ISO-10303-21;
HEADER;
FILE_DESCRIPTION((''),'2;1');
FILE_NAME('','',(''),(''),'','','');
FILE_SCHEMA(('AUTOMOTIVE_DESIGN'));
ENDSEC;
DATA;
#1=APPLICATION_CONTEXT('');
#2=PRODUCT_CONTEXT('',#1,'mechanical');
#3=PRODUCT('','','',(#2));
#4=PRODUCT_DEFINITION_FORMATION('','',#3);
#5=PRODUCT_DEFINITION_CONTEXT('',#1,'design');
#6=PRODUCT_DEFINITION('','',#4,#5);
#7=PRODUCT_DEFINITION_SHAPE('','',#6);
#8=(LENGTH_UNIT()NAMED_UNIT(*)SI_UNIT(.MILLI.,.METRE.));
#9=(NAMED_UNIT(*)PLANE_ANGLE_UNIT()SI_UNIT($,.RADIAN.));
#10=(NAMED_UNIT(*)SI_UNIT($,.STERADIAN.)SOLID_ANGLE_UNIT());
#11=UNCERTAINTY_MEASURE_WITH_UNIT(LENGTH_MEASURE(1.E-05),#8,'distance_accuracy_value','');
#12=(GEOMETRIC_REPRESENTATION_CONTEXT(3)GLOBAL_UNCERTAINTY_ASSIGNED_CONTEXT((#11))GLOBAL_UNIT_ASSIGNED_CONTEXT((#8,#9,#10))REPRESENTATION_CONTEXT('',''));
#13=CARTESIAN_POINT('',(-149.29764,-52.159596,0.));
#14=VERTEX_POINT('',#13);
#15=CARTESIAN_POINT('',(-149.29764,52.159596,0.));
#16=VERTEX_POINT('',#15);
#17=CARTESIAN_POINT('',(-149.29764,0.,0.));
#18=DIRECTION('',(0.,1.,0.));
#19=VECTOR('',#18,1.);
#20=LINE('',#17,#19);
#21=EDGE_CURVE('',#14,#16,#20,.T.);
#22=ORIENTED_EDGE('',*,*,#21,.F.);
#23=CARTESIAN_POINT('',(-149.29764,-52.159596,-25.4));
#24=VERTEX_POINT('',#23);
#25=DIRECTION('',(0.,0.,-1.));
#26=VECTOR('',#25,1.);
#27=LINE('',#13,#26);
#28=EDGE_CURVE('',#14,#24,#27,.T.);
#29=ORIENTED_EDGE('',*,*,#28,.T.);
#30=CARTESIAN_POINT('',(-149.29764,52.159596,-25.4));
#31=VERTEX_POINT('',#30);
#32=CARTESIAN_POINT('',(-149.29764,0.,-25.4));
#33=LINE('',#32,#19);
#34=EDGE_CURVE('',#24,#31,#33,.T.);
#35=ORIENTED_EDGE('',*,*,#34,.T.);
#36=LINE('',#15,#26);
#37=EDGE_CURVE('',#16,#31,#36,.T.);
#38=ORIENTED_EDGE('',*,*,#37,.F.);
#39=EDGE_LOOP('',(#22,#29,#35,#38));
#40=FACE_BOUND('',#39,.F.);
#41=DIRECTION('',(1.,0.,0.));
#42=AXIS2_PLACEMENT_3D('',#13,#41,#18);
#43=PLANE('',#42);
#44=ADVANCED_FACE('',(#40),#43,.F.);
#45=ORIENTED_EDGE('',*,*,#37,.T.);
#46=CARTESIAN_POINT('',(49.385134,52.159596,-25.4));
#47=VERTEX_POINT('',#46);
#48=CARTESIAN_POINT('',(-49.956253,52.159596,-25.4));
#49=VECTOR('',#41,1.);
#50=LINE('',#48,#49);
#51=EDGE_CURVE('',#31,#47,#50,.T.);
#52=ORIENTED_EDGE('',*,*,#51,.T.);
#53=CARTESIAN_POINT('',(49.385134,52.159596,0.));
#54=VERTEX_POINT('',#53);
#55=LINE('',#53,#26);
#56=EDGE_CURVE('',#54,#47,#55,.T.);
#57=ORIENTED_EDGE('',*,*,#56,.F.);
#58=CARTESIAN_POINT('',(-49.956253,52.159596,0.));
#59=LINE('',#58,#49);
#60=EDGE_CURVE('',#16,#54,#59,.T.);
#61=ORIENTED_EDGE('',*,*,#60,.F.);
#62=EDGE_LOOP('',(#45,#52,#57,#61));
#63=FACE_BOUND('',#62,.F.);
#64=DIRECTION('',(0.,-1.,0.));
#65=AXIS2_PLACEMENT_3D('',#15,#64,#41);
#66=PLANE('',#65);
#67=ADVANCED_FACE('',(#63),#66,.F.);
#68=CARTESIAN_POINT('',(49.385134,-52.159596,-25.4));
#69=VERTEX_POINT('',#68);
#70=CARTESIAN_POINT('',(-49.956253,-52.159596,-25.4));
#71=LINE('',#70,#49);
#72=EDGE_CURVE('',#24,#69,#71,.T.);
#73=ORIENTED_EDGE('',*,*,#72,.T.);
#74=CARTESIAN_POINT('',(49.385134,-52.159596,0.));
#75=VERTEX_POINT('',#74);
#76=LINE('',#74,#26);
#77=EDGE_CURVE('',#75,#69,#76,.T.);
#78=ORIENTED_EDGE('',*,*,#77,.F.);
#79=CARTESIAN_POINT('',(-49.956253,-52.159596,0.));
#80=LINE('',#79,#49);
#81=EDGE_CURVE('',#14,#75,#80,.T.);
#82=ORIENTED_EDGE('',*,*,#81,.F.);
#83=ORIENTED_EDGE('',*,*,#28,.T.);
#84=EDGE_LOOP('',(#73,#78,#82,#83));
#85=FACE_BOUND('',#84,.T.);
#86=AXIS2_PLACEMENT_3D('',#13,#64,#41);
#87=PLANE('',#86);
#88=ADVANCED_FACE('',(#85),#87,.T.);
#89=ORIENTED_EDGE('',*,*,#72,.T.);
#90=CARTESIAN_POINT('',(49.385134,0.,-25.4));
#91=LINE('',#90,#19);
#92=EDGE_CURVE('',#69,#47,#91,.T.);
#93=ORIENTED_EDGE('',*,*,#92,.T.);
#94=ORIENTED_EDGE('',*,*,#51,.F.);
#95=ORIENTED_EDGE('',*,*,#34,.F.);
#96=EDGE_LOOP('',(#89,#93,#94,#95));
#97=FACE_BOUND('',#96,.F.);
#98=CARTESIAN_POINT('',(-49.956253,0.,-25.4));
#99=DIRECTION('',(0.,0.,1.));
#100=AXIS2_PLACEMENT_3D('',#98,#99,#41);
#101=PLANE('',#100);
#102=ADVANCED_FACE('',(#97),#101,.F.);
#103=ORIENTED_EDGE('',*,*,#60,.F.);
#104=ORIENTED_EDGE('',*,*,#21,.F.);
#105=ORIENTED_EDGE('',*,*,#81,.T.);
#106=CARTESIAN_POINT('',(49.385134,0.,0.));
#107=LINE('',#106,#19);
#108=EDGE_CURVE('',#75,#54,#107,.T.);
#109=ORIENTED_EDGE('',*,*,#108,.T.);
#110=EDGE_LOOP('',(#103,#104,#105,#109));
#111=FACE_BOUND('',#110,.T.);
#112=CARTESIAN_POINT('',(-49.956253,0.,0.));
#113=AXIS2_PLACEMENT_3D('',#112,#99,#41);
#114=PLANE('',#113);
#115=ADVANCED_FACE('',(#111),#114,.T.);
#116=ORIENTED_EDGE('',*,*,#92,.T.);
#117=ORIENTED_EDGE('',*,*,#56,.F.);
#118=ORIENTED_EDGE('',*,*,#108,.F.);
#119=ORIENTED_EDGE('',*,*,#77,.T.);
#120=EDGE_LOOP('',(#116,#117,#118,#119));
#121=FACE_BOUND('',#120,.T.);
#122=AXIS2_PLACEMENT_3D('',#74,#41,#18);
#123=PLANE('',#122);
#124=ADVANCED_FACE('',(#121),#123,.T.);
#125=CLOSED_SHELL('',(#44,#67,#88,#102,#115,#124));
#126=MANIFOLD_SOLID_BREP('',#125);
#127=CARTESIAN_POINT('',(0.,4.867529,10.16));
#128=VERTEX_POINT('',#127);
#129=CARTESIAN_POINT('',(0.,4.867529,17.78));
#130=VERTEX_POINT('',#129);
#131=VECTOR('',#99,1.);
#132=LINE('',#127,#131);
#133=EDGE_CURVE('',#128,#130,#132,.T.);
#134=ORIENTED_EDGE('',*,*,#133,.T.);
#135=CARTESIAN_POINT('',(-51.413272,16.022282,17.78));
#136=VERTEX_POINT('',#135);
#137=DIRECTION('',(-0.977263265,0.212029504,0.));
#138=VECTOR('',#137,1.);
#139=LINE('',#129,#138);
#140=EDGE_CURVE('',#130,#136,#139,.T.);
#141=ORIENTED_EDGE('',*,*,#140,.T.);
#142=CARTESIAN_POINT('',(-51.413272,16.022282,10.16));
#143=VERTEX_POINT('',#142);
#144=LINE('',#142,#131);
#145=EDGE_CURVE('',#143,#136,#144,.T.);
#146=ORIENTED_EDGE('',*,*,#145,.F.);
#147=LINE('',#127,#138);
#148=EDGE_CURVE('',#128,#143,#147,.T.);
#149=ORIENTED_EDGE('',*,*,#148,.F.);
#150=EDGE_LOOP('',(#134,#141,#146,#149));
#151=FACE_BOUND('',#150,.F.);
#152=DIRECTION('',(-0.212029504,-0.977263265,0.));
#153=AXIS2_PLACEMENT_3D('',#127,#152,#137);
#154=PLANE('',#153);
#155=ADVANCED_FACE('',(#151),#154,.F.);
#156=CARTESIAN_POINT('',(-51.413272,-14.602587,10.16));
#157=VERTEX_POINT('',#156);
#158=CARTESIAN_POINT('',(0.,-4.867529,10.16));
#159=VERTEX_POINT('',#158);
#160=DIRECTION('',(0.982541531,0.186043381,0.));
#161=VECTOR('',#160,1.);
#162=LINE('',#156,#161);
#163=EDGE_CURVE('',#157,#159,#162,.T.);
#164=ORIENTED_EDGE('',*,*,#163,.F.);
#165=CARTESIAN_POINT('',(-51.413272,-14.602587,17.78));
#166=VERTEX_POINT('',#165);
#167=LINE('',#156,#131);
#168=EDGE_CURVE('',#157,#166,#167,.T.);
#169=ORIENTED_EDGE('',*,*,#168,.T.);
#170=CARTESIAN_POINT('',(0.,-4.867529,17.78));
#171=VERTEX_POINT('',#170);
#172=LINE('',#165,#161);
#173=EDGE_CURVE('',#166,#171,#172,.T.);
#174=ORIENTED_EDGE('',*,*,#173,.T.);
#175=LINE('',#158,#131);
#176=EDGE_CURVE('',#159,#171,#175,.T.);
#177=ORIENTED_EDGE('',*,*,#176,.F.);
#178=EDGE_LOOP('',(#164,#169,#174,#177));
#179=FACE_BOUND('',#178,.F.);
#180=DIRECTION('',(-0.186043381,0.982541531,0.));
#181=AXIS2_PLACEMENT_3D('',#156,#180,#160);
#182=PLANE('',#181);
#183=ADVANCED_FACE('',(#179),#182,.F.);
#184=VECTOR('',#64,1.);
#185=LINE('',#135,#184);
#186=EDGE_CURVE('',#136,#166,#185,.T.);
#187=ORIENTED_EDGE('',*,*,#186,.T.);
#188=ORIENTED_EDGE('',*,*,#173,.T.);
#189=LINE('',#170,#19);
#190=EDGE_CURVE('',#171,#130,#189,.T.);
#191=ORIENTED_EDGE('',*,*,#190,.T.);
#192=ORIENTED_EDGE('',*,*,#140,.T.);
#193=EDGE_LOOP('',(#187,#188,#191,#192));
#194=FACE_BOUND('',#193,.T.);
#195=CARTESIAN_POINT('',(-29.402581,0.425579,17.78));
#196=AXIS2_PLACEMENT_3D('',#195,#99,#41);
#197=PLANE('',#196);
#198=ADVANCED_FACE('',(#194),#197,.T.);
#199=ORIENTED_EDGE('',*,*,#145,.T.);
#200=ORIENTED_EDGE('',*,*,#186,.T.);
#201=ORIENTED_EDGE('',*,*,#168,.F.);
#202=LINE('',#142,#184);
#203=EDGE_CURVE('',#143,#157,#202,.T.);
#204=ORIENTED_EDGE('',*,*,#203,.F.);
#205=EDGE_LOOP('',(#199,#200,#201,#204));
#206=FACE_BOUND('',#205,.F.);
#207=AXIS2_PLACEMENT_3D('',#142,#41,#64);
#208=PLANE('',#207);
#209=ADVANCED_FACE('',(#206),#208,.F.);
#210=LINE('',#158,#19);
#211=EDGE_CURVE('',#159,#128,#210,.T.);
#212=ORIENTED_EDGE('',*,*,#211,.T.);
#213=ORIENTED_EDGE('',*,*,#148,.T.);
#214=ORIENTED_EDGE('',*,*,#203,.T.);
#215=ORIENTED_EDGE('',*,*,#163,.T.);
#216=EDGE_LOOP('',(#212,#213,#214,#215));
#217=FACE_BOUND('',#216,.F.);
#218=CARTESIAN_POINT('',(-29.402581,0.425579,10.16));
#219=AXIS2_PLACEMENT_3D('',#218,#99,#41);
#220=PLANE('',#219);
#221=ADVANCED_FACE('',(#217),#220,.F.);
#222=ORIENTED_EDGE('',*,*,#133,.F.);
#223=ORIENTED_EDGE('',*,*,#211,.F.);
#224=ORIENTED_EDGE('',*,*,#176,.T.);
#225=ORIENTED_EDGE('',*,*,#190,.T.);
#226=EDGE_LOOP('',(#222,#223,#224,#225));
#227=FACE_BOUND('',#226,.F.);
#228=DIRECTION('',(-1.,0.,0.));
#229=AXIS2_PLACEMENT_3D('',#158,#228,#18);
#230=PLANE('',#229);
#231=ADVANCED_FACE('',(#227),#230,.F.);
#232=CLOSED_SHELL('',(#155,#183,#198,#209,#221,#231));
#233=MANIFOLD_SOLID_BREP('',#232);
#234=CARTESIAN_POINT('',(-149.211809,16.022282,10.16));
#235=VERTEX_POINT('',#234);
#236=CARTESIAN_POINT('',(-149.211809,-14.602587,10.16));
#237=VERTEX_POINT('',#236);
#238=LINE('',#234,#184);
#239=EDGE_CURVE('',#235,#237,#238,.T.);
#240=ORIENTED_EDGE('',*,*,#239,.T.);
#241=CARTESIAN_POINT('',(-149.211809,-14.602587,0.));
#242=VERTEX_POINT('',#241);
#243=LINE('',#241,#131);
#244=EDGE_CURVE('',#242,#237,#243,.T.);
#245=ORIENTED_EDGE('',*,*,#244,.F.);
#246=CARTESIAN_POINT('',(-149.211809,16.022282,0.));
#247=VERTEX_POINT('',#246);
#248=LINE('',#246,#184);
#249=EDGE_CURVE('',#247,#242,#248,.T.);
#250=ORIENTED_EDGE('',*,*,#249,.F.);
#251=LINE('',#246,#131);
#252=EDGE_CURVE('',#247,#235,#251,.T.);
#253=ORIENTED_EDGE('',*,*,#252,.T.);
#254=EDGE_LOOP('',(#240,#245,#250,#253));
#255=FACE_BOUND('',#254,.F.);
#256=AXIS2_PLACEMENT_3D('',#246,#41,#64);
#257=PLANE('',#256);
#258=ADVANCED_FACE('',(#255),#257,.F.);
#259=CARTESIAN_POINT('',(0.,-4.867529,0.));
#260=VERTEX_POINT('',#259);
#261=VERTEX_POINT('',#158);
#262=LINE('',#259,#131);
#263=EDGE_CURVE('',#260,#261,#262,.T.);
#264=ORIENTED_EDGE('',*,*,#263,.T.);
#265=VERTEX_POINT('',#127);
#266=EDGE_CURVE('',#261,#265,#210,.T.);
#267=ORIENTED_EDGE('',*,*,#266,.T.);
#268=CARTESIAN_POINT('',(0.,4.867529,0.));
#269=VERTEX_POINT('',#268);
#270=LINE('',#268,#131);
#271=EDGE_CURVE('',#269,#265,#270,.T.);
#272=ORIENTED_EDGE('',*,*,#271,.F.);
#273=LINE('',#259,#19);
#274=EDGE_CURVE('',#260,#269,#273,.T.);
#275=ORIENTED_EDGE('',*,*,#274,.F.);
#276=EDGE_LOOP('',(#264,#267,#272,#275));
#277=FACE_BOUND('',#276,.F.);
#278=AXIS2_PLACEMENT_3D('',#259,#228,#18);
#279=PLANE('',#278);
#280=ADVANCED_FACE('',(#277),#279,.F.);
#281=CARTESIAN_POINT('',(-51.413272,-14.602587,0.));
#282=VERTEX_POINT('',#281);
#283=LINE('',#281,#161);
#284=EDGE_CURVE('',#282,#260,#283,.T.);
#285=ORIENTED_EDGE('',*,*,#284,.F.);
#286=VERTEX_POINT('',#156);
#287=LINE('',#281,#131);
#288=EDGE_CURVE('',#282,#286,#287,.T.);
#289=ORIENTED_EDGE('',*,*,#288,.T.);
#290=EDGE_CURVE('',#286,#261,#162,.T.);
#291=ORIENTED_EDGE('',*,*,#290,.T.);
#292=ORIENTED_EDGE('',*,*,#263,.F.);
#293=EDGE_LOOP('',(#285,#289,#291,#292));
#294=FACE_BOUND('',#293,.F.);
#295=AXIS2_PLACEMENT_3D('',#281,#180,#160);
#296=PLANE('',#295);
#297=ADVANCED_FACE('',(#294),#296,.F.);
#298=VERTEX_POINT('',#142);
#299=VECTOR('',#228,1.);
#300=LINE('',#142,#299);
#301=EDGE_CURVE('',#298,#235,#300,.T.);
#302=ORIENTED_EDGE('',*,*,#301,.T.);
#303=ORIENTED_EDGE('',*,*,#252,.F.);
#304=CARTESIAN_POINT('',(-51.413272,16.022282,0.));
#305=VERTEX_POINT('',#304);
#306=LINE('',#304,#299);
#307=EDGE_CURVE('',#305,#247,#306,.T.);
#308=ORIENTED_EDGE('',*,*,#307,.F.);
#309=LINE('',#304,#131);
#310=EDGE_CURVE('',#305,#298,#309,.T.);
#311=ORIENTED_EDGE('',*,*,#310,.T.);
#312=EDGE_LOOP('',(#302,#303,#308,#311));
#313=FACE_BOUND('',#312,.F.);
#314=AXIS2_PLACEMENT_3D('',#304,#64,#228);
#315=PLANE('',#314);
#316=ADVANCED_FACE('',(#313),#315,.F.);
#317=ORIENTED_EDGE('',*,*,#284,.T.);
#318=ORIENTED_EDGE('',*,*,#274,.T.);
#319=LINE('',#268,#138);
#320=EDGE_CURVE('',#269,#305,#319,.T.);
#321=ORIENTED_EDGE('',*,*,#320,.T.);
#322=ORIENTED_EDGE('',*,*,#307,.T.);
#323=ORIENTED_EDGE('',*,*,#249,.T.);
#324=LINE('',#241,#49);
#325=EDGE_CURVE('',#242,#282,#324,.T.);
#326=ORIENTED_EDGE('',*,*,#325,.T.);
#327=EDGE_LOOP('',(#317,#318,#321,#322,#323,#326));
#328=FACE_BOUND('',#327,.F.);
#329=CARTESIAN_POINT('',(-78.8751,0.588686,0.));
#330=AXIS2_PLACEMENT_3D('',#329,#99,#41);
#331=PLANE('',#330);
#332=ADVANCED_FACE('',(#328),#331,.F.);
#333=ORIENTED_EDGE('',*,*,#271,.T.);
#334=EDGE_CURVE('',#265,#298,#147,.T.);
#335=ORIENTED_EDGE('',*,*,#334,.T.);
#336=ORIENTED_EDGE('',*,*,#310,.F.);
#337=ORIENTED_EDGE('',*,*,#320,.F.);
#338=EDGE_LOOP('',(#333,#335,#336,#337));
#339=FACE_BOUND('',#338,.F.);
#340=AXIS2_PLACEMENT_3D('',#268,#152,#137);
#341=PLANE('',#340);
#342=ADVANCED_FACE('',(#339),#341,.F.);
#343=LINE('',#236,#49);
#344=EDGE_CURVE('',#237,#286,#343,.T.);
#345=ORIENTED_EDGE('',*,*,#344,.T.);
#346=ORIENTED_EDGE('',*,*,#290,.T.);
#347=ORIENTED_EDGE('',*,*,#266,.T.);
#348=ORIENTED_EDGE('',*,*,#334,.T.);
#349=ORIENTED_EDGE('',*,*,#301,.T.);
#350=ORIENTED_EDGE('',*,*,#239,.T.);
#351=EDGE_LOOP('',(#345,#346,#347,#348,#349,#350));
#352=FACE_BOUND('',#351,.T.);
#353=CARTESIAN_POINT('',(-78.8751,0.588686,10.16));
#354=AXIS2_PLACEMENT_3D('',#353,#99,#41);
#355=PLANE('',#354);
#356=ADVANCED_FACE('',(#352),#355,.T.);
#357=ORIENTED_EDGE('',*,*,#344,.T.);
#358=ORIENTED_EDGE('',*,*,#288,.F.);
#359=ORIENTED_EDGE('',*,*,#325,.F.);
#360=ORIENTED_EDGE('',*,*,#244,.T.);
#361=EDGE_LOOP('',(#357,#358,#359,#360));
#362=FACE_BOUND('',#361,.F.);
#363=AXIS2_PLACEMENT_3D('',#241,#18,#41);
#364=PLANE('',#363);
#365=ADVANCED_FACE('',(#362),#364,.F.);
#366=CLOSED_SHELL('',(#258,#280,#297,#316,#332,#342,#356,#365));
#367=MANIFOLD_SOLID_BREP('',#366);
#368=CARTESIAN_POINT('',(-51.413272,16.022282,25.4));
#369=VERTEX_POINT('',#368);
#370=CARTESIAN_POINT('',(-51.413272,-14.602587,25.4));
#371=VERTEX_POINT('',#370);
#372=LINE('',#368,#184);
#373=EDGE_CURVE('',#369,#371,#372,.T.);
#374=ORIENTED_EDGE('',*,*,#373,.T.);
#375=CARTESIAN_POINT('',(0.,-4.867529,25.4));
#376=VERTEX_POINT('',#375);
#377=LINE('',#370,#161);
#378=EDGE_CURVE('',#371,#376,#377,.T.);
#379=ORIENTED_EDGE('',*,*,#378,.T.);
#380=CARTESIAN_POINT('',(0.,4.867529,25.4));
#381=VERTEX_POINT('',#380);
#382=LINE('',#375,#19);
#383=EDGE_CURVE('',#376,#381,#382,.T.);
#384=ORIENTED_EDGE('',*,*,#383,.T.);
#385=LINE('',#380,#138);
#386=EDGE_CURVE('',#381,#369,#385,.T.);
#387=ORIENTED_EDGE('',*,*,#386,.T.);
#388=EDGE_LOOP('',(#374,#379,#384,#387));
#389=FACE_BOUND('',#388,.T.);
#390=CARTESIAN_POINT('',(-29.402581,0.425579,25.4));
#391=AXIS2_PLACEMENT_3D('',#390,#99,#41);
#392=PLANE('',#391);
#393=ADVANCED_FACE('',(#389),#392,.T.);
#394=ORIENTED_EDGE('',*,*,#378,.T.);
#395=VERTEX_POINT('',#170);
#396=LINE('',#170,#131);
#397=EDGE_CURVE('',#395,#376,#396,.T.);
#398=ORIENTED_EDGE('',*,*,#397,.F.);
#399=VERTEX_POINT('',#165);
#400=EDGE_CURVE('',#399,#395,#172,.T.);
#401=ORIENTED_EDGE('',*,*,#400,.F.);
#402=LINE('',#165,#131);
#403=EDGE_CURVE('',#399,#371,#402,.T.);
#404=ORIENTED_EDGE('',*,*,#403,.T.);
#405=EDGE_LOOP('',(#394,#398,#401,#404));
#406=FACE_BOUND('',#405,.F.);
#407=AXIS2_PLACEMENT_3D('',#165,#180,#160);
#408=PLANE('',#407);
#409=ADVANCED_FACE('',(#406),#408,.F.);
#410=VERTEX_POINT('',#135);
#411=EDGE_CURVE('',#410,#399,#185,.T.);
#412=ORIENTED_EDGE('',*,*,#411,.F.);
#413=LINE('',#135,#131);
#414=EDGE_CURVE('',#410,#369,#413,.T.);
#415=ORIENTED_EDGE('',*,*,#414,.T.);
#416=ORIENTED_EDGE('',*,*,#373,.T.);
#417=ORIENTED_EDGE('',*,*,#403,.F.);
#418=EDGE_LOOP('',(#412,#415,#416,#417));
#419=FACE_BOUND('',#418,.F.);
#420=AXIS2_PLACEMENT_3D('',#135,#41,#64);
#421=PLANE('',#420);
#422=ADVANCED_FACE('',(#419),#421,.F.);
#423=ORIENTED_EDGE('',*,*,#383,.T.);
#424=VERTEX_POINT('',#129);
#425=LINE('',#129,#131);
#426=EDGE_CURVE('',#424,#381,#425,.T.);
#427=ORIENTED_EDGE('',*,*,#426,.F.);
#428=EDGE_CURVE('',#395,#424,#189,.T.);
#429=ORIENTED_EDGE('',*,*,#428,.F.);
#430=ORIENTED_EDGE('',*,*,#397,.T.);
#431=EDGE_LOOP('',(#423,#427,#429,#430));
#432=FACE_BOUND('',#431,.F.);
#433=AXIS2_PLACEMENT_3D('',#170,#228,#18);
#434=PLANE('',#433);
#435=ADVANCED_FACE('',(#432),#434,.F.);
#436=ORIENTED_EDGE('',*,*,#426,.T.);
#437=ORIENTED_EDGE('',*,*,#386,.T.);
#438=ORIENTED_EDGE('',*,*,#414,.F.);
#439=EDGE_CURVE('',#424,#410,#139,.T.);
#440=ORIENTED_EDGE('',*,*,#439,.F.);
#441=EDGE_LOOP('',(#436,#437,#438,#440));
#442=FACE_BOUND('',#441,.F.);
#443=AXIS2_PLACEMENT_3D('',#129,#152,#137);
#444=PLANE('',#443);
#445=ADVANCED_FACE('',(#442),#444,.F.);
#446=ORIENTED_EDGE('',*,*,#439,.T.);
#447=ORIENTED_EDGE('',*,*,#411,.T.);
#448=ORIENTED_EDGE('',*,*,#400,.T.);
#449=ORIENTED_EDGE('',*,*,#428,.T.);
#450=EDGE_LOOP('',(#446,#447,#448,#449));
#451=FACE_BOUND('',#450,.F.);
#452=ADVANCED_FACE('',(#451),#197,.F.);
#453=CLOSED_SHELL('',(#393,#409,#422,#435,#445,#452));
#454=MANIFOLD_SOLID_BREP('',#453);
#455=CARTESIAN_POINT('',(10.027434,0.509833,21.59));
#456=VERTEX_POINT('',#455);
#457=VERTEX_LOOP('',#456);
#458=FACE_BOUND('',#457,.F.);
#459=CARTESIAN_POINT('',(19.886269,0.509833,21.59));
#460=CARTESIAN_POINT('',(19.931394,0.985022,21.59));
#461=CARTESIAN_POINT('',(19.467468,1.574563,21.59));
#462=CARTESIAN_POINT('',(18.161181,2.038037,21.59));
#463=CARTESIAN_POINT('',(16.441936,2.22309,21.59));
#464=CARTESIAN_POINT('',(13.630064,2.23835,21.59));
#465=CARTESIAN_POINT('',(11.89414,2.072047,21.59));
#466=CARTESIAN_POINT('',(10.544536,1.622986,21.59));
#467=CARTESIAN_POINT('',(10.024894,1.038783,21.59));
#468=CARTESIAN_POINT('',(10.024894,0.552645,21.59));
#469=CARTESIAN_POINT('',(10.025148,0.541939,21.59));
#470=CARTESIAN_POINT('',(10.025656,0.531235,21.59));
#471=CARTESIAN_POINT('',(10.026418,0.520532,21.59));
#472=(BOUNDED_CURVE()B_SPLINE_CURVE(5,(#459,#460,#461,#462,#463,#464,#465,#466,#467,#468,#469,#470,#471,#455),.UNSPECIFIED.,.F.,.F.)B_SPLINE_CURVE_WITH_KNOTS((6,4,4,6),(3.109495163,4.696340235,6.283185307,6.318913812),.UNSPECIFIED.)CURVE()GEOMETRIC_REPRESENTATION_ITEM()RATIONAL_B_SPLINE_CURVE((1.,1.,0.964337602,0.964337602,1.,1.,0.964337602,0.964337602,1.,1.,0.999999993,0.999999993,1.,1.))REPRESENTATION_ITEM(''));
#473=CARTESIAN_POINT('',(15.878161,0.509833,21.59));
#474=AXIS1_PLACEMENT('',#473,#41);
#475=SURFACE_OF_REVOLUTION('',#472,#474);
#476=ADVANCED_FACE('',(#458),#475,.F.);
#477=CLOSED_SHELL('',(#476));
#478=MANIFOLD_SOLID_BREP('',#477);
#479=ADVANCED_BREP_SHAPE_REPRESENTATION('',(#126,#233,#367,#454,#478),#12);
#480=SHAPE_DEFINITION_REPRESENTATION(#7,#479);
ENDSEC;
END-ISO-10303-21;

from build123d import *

# Parameters (mm, degrees)
F0_W     = 198.6827738583
F0_H     = 104.3191924691
F1_DEPTH = 25.4
F3_DEPTH = 10.16
F5_DEPTH = 7.62
F7_DEPTH = 7.62


# Not quite as in the source:
# - a feature names something its author has since deleted; it is built from what else it names


with BuildPart() as f1:
    # F0 (on Top) → F1 (new body)
    with BuildSketch(Plane.XY):
        with Locations((-49.9562527984, 0)):
            Rectangle(F0_W, F0_H)
    extrude(amount=-F1_DEPTH)


with BuildPart() as f3:
    # F2 (on face) → F3 (new body)
    with BuildSketch(Plane.XY):
        Polygon((0, 4.8675285652), (-51.4132715762, 16.0222817212), (-149.2118090391, 16.0222817212), (-149.2118090391, -14.602586627), (-51.4132715762, -14.602586627), (0, -4.8675285652), align=None)
    extrude(amount=F3_DEPTH)


with BuildPart() as f5:
    # F4 (on face) → F5 (new body)
    with BuildSketch(Plane.XY.offset(10.16)):
        Polygon((0, 4.8675285652), (-51.4132715762, 16.0222817212), (-51.4132715762, -14.602586627), (0, -4.8675285652), align=None)
    extrude(amount=F5_DEPTH)


with BuildPart() as f7:
    # F6 (on face) → F7 (new body)
    with BuildSketch(Plane.XY.offset(17.78)):
        Polygon((0, 4.8675285652), (-51.4132715762, 16.0222817212), (-51.4132715762, -14.602586627), (0, -4.8675285652), align=None)
    extrude(amount=F7_DEPTH)


with BuildPart() as f10:
    # F9 (on offset) → F10 (revolve)
    with BuildSketch(Plane.XY.offset(21.59)):
        with BuildLine():
            add(Edge.make_bspline(
                [(19.8862690043, 0.5098331603), (20.047106034, 2.2035256943), (15.0359997695, 2.2307201746), (10.024893505, 2.2579146549), (10.024893505, 0.5633492838)],
                knots=[3.1094951634, 3.1094951634, 3.1094951634, 4.6963402353, 4.6963402353, 6.2831853072, 6.2831853072, 6.2831853072], degree=2, weights=[1, 0.7014099885, 1, 0.7014099885, 1]))
            add(Edge.make_bspline(
                [(10.024893505, 0.5633492838), (10.024893505, 0.536584329), (10.027433859, 0.5098331603)],
                knots=[0, 0, 0, 0.0320974902, 0.0320974902, 0.0320974902], degree=2, weights=[1, 0.9998712217, 1]))
            Line((10.027433859, 0.5098331603), (19.8862690043, 0.5098331603))
        make_face()
    revolve(axis=Axis((15.8781609207, 0.5098331603, 21.59), (1, 0, 0)))


solid = Compound([f1.part, f3.part, f5.part, f7.part, f10.part])
